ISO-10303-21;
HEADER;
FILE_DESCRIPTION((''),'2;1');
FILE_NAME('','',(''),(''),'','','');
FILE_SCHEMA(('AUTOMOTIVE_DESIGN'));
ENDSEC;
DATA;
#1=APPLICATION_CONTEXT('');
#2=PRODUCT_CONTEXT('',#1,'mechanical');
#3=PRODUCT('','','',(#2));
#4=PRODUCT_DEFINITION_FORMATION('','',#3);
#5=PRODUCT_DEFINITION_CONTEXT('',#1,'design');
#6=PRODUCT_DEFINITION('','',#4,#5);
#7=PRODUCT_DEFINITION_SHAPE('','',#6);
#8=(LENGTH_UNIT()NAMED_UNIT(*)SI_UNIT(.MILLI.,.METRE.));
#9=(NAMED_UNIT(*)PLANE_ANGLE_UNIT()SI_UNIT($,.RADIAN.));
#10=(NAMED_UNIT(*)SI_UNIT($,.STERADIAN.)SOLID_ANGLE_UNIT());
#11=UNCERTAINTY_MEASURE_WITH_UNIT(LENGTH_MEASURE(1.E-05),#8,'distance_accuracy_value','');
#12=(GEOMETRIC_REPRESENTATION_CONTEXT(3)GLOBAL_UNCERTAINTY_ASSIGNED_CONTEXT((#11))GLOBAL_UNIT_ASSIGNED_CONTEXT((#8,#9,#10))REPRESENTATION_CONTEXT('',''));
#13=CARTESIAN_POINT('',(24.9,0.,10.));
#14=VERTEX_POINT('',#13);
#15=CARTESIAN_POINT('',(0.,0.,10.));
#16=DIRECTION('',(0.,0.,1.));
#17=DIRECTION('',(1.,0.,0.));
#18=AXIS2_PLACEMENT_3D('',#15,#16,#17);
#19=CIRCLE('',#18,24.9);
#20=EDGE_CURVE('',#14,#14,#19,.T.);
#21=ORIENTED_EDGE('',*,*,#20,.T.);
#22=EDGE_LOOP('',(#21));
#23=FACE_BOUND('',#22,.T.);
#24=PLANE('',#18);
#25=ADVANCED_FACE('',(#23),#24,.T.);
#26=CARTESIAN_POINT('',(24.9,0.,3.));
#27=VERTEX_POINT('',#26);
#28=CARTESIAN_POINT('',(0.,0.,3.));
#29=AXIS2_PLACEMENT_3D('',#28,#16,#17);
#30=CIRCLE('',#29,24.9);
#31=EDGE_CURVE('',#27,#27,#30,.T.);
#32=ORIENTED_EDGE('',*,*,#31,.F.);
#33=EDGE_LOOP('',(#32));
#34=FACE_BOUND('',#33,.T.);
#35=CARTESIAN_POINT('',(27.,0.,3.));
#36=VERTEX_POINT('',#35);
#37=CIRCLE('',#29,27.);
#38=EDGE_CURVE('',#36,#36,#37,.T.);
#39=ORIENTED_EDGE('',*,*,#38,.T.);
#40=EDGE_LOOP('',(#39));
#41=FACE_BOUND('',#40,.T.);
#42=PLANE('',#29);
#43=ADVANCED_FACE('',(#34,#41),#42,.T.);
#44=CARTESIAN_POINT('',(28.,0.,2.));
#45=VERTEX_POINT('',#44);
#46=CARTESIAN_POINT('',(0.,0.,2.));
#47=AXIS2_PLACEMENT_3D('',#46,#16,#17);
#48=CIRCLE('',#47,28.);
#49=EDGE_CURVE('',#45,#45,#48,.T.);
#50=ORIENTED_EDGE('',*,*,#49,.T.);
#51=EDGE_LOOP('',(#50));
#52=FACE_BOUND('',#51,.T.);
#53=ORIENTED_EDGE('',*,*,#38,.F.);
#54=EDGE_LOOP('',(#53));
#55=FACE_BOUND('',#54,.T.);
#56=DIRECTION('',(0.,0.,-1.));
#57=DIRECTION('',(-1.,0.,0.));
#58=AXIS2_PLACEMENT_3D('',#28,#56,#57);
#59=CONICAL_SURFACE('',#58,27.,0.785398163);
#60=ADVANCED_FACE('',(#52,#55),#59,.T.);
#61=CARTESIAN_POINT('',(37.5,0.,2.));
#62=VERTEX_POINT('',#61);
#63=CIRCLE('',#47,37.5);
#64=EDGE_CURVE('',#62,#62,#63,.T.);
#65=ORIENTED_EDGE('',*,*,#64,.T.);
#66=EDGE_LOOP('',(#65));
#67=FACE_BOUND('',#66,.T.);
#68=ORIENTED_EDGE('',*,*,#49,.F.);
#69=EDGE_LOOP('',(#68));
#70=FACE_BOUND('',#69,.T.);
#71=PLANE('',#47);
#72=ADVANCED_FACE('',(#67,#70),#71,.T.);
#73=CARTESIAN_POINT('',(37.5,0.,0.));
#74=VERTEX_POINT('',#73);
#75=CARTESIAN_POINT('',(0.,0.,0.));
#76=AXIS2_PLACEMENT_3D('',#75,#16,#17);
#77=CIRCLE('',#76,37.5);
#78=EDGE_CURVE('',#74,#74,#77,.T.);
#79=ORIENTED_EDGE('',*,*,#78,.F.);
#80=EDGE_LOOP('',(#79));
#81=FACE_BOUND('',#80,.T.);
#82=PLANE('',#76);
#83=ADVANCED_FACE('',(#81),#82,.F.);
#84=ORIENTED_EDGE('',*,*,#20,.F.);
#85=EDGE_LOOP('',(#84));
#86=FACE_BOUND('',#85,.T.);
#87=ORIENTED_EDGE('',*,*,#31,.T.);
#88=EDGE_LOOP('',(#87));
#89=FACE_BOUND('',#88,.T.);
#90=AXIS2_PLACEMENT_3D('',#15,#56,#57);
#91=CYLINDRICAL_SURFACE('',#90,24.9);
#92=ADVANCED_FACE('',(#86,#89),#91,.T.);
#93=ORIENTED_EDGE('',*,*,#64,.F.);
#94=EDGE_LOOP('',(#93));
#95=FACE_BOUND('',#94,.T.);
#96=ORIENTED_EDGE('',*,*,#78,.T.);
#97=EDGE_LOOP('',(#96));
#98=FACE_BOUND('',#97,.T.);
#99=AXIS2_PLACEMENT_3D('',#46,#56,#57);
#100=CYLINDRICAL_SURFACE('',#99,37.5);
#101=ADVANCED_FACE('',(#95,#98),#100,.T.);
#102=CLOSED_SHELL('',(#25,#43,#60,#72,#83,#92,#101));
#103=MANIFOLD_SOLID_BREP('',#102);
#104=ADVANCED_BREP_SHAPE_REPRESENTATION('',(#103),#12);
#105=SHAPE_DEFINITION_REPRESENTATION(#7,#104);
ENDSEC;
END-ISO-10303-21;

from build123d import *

# Parameters (mm, degrees)
SKETCH1_R           = 37.5
BOSS_EXTRUDE1_DEPTH = 2
SKETCH5_R           = 28
BOSS_EXTRUDE5_DEPTH = 1
SKETCH2_R           = 24.9
BOSS_EXTRUDE2_DEPTH = 7
CHAMFER1_SIZE       = 1


with BuildPart() as part:
    # Sketch1 → Boss-Extrude1 (new body)
    with BuildSketch(Plane.XY):
        Circle(SKETCH1_R)
    extrude(amount=BOSS_EXTRUDE1_DEPTH)

    # Sketch5 → Boss-Extrude5 (add)
    with BuildSketch(Plane.XY.offset(2)):
        Circle(SKETCH5_R)
    extrude(amount=BOSS_EXTRUDE5_DEPTH)

    # Sketch2 → Boss-Extrude2 (add)
    with BuildSketch(Plane.XY.offset(3)):
        Circle(SKETCH2_R)
    extrude(amount=BOSS_EXTRUDE2_DEPTH)

    # Chamfer1
    chamfer1_edges = [part.edges().sort_by_distance(p)[0] for p in [
        (-28, 0, 3),
    ]]
    chamfer(chamfer1_edges, length=CHAMFER1_SIZE - 0.0001)  # a hair under: the kernel refuses the full size


solid = part.part
